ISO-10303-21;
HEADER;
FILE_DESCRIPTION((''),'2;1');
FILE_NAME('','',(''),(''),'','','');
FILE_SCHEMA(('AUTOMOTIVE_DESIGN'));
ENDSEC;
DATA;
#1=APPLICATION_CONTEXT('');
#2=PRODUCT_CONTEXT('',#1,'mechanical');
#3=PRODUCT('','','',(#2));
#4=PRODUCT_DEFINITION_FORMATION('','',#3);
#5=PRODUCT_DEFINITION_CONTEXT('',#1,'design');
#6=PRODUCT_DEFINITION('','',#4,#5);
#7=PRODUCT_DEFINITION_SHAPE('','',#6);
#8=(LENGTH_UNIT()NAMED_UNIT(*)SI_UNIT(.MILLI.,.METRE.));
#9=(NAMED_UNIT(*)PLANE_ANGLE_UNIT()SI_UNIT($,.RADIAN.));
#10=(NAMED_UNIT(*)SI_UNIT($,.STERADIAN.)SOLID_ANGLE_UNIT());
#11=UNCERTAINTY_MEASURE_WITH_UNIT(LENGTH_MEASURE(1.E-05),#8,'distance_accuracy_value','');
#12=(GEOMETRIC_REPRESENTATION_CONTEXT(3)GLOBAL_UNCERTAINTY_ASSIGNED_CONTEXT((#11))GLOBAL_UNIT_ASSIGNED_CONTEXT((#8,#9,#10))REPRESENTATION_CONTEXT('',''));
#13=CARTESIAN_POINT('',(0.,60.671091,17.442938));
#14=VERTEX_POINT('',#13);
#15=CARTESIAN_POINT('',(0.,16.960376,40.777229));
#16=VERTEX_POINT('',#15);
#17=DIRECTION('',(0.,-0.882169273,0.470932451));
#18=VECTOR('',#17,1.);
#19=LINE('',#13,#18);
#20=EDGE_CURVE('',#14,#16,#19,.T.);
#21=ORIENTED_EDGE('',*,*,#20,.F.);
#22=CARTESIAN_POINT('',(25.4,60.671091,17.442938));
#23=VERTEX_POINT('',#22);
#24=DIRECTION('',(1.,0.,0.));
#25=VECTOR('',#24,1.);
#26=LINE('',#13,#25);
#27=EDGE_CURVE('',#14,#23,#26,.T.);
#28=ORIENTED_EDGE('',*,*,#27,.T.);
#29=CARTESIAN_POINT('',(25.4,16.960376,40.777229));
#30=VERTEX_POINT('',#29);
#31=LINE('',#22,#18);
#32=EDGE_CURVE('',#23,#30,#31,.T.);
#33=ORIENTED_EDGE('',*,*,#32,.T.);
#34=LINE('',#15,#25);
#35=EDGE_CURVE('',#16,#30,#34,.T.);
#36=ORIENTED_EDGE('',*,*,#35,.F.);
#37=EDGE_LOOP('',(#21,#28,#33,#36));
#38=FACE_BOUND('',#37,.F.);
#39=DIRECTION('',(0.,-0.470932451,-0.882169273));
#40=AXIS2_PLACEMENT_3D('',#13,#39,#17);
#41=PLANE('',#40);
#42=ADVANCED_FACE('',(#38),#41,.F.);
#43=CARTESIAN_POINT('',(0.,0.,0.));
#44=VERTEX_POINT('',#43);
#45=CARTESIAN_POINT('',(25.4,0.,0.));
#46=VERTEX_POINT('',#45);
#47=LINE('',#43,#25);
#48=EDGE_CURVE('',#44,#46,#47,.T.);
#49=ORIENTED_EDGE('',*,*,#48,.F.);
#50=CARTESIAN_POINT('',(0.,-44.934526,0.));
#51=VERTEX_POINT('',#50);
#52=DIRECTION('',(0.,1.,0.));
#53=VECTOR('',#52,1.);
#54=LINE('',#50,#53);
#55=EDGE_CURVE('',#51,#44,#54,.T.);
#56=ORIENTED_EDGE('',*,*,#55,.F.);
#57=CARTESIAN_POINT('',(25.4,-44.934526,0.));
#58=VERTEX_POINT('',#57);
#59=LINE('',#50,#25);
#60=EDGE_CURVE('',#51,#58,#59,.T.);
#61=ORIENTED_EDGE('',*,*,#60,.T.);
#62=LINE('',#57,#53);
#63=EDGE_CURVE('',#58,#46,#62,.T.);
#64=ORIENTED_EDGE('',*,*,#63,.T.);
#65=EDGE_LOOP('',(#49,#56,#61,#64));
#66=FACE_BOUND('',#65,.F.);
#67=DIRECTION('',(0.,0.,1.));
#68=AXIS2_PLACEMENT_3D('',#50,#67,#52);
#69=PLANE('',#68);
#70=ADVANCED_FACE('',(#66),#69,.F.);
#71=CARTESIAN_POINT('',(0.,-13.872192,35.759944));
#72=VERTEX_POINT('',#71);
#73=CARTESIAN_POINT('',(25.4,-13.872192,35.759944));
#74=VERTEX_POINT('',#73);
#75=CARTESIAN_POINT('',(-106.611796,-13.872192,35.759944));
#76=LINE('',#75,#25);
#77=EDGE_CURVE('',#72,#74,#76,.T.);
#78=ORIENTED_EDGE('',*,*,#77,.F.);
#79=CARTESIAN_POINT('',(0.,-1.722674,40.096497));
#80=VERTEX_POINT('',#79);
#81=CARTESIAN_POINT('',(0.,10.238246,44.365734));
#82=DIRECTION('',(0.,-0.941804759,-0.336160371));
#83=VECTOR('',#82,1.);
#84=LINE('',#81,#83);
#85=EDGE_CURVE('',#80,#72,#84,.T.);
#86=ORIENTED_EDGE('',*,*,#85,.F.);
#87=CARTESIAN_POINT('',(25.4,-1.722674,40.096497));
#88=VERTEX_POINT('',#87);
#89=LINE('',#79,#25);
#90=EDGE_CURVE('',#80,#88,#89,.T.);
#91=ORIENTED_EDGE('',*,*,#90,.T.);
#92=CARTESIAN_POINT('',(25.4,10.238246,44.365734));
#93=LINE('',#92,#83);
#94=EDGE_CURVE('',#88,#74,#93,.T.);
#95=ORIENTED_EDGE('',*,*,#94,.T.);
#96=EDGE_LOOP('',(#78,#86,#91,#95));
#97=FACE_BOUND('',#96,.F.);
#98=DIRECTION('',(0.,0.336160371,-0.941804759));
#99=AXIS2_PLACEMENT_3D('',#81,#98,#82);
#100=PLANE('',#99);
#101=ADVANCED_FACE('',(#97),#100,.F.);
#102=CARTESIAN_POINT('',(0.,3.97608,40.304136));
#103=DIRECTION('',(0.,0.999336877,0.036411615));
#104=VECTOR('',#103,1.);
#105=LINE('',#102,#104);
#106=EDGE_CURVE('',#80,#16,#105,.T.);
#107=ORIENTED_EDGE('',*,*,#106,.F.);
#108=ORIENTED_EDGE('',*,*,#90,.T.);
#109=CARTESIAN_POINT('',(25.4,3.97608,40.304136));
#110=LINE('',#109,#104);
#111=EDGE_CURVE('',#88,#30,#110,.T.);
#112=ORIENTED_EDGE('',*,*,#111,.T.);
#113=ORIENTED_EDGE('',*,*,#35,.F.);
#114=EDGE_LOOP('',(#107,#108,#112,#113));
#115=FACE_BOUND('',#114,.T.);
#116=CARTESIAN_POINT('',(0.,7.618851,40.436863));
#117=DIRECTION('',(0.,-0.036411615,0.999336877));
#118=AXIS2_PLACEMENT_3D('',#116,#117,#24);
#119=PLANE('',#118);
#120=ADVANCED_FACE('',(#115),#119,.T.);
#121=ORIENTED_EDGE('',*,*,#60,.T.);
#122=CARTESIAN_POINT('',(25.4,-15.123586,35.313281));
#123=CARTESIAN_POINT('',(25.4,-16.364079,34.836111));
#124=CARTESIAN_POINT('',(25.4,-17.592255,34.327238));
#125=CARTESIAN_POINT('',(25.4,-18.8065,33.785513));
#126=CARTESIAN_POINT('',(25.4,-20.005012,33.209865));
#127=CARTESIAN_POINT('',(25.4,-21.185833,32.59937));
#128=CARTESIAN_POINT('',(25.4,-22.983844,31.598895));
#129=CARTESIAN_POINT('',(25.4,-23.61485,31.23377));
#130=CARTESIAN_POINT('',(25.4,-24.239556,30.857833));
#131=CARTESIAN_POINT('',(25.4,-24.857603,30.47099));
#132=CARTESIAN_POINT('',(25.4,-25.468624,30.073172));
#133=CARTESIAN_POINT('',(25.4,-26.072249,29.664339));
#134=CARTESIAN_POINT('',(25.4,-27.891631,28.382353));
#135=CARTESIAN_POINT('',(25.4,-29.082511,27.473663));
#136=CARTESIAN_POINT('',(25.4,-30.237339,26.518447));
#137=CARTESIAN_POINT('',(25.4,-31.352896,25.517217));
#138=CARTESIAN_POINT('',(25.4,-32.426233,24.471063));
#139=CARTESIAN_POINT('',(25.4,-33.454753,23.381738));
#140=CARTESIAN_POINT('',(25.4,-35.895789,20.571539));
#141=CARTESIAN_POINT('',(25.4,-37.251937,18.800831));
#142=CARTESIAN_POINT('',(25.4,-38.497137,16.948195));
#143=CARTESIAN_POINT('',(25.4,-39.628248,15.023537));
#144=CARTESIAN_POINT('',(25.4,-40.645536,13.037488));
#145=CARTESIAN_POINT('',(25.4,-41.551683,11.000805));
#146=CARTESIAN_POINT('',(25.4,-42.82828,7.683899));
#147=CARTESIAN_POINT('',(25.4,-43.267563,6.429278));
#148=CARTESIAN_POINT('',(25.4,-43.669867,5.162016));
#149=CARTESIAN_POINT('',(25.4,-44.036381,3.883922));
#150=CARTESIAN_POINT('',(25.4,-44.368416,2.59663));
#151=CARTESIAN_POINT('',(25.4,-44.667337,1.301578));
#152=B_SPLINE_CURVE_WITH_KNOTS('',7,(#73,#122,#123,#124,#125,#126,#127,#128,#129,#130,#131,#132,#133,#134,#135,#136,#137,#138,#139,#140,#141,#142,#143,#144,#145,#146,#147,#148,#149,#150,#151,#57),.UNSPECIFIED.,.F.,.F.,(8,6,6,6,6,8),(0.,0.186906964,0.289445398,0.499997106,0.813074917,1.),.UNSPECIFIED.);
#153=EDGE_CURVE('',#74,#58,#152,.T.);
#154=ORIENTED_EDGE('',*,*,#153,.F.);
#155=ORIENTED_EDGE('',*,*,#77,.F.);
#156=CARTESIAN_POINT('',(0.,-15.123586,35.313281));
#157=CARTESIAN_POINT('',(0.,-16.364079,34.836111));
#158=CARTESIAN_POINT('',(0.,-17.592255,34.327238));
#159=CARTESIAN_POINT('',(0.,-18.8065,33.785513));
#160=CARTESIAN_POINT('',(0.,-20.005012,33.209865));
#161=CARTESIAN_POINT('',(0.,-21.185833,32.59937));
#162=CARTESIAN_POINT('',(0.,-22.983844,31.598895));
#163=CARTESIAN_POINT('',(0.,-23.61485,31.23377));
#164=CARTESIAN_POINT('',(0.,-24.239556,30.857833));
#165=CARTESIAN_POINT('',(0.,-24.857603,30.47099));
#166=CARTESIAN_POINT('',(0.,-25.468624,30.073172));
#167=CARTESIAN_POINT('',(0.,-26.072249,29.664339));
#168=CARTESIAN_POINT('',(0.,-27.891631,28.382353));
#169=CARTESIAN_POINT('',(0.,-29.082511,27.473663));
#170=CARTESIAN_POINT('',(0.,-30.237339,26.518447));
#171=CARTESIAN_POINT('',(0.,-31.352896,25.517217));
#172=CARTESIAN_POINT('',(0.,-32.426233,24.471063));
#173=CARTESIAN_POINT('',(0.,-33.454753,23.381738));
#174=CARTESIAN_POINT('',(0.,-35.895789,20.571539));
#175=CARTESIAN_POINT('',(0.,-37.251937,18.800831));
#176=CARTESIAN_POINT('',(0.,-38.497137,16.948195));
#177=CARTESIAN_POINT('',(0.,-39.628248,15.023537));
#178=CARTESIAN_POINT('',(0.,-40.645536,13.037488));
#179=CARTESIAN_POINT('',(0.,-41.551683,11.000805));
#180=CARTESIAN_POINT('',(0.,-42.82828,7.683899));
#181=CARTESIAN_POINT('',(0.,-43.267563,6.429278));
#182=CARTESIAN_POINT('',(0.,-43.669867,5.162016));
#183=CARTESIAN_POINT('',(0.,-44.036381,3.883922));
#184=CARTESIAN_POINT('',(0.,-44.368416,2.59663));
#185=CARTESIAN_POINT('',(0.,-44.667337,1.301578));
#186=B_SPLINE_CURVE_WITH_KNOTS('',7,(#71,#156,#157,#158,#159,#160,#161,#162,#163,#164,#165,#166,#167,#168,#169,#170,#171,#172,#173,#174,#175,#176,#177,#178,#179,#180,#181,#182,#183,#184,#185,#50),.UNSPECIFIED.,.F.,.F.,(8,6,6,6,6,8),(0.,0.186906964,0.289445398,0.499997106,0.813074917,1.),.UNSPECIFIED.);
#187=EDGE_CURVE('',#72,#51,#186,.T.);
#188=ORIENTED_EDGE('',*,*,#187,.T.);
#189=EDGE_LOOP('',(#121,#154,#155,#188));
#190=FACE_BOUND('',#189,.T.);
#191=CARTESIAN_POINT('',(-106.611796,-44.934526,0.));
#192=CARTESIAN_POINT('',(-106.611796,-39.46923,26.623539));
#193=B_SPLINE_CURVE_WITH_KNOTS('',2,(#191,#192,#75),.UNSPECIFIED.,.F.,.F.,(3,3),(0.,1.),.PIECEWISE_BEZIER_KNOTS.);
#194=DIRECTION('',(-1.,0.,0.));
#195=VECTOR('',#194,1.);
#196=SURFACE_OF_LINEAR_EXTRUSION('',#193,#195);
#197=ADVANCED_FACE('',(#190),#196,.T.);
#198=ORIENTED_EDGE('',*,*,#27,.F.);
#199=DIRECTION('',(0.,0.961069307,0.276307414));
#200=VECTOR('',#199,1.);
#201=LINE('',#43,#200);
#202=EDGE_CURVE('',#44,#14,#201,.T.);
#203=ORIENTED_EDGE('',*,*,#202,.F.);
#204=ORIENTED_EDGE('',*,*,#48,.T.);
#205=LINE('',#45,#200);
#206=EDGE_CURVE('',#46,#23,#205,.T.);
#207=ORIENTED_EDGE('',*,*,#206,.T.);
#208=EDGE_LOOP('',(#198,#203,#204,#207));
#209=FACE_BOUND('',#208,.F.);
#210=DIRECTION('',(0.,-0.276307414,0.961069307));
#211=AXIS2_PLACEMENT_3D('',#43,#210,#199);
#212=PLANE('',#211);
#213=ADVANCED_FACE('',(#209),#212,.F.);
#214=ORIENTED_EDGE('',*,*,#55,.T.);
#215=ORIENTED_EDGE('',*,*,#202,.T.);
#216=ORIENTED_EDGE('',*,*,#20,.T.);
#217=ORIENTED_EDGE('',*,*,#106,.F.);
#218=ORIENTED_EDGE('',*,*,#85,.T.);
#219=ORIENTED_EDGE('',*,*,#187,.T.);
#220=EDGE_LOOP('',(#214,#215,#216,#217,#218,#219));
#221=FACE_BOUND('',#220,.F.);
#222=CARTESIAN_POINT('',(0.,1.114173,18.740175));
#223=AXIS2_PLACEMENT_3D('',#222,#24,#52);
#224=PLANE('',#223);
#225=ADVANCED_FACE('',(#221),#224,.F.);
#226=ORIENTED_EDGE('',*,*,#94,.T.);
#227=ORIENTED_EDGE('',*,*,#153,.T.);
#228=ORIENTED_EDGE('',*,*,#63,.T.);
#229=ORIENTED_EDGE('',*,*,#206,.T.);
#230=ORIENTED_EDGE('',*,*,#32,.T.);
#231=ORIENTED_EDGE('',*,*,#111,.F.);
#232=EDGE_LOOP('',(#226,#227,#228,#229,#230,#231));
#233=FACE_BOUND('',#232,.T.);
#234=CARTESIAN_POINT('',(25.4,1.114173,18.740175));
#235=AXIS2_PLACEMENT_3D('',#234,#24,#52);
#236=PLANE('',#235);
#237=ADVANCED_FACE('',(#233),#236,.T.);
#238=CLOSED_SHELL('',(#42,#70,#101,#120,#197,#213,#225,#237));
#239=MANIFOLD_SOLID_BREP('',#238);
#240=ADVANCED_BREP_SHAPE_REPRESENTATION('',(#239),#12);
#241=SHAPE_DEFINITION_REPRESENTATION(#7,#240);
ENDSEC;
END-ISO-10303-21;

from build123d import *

# Parameters (mm, degrees)
F1_DEPTH    = 25.4
F2_T1_DEPTH = 238.6235911332
F3_SIZE2    = 7.62
F3_SIZE     = 12.7


# Not quite as in the source:
# - a fillet or chamfer that OpenCascade refuses, or shapes differently, is made with other operations: its cross-section is extruded or revolved along the edge and cut away or added


with BuildPart() as f1:
    # F0 (on Right) → F1 (new body)
    with BuildSketch(Plane.YZ):
        Polygon((-44.9345260859, 0), (0, 0), (60.6710910797, 17.4429379404), (10.2382460609, 44.3657338619), (-54.0351904929, 21.4244797826), align=None)
    extrude(amount=F1_DEPTH)

    # F2: fillet of radius 48.2774474346 on 1 edges, made by hand

    # F2_s2 → F2_t1 (cut)
    with BuildSketch(Plane.YZ.offset(-106.6117955666)):
        with BuildLine():
            add(Edge.make_bspline(
                [(-44.9345260859, 0), (-39.4692303476, 26.6235388421), (-13.8721919012, 35.7599440845)],
                knots=[0, 0, 0, 1, 1, 1], degree=2, weights=[1, 1, 1]))
            Line((-13.8721919012, 35.7599440845), (-54.0351904929, 21.4244797826))
            Line((-54.0351904929, 21.4244797826), (-44.9345260859, 0))
        make_face()
    extrude(amount=F2_T1_DEPTH, mode=Mode.SUBTRACT)

    # F3
    f3_edges = [f1.edges().sort_by_distance(p)[0] for p in [
        (12.7, 10.238246, 44.365734),
    ]]
    f3_side = f1.faces().sort_by_distance((12.7, -1.816973, 40.062839))[0]
    chamfer(f3_edges, length=F3_SIZE, length2=F3_SIZE2, reference=f3_side)


solid = f1.part
